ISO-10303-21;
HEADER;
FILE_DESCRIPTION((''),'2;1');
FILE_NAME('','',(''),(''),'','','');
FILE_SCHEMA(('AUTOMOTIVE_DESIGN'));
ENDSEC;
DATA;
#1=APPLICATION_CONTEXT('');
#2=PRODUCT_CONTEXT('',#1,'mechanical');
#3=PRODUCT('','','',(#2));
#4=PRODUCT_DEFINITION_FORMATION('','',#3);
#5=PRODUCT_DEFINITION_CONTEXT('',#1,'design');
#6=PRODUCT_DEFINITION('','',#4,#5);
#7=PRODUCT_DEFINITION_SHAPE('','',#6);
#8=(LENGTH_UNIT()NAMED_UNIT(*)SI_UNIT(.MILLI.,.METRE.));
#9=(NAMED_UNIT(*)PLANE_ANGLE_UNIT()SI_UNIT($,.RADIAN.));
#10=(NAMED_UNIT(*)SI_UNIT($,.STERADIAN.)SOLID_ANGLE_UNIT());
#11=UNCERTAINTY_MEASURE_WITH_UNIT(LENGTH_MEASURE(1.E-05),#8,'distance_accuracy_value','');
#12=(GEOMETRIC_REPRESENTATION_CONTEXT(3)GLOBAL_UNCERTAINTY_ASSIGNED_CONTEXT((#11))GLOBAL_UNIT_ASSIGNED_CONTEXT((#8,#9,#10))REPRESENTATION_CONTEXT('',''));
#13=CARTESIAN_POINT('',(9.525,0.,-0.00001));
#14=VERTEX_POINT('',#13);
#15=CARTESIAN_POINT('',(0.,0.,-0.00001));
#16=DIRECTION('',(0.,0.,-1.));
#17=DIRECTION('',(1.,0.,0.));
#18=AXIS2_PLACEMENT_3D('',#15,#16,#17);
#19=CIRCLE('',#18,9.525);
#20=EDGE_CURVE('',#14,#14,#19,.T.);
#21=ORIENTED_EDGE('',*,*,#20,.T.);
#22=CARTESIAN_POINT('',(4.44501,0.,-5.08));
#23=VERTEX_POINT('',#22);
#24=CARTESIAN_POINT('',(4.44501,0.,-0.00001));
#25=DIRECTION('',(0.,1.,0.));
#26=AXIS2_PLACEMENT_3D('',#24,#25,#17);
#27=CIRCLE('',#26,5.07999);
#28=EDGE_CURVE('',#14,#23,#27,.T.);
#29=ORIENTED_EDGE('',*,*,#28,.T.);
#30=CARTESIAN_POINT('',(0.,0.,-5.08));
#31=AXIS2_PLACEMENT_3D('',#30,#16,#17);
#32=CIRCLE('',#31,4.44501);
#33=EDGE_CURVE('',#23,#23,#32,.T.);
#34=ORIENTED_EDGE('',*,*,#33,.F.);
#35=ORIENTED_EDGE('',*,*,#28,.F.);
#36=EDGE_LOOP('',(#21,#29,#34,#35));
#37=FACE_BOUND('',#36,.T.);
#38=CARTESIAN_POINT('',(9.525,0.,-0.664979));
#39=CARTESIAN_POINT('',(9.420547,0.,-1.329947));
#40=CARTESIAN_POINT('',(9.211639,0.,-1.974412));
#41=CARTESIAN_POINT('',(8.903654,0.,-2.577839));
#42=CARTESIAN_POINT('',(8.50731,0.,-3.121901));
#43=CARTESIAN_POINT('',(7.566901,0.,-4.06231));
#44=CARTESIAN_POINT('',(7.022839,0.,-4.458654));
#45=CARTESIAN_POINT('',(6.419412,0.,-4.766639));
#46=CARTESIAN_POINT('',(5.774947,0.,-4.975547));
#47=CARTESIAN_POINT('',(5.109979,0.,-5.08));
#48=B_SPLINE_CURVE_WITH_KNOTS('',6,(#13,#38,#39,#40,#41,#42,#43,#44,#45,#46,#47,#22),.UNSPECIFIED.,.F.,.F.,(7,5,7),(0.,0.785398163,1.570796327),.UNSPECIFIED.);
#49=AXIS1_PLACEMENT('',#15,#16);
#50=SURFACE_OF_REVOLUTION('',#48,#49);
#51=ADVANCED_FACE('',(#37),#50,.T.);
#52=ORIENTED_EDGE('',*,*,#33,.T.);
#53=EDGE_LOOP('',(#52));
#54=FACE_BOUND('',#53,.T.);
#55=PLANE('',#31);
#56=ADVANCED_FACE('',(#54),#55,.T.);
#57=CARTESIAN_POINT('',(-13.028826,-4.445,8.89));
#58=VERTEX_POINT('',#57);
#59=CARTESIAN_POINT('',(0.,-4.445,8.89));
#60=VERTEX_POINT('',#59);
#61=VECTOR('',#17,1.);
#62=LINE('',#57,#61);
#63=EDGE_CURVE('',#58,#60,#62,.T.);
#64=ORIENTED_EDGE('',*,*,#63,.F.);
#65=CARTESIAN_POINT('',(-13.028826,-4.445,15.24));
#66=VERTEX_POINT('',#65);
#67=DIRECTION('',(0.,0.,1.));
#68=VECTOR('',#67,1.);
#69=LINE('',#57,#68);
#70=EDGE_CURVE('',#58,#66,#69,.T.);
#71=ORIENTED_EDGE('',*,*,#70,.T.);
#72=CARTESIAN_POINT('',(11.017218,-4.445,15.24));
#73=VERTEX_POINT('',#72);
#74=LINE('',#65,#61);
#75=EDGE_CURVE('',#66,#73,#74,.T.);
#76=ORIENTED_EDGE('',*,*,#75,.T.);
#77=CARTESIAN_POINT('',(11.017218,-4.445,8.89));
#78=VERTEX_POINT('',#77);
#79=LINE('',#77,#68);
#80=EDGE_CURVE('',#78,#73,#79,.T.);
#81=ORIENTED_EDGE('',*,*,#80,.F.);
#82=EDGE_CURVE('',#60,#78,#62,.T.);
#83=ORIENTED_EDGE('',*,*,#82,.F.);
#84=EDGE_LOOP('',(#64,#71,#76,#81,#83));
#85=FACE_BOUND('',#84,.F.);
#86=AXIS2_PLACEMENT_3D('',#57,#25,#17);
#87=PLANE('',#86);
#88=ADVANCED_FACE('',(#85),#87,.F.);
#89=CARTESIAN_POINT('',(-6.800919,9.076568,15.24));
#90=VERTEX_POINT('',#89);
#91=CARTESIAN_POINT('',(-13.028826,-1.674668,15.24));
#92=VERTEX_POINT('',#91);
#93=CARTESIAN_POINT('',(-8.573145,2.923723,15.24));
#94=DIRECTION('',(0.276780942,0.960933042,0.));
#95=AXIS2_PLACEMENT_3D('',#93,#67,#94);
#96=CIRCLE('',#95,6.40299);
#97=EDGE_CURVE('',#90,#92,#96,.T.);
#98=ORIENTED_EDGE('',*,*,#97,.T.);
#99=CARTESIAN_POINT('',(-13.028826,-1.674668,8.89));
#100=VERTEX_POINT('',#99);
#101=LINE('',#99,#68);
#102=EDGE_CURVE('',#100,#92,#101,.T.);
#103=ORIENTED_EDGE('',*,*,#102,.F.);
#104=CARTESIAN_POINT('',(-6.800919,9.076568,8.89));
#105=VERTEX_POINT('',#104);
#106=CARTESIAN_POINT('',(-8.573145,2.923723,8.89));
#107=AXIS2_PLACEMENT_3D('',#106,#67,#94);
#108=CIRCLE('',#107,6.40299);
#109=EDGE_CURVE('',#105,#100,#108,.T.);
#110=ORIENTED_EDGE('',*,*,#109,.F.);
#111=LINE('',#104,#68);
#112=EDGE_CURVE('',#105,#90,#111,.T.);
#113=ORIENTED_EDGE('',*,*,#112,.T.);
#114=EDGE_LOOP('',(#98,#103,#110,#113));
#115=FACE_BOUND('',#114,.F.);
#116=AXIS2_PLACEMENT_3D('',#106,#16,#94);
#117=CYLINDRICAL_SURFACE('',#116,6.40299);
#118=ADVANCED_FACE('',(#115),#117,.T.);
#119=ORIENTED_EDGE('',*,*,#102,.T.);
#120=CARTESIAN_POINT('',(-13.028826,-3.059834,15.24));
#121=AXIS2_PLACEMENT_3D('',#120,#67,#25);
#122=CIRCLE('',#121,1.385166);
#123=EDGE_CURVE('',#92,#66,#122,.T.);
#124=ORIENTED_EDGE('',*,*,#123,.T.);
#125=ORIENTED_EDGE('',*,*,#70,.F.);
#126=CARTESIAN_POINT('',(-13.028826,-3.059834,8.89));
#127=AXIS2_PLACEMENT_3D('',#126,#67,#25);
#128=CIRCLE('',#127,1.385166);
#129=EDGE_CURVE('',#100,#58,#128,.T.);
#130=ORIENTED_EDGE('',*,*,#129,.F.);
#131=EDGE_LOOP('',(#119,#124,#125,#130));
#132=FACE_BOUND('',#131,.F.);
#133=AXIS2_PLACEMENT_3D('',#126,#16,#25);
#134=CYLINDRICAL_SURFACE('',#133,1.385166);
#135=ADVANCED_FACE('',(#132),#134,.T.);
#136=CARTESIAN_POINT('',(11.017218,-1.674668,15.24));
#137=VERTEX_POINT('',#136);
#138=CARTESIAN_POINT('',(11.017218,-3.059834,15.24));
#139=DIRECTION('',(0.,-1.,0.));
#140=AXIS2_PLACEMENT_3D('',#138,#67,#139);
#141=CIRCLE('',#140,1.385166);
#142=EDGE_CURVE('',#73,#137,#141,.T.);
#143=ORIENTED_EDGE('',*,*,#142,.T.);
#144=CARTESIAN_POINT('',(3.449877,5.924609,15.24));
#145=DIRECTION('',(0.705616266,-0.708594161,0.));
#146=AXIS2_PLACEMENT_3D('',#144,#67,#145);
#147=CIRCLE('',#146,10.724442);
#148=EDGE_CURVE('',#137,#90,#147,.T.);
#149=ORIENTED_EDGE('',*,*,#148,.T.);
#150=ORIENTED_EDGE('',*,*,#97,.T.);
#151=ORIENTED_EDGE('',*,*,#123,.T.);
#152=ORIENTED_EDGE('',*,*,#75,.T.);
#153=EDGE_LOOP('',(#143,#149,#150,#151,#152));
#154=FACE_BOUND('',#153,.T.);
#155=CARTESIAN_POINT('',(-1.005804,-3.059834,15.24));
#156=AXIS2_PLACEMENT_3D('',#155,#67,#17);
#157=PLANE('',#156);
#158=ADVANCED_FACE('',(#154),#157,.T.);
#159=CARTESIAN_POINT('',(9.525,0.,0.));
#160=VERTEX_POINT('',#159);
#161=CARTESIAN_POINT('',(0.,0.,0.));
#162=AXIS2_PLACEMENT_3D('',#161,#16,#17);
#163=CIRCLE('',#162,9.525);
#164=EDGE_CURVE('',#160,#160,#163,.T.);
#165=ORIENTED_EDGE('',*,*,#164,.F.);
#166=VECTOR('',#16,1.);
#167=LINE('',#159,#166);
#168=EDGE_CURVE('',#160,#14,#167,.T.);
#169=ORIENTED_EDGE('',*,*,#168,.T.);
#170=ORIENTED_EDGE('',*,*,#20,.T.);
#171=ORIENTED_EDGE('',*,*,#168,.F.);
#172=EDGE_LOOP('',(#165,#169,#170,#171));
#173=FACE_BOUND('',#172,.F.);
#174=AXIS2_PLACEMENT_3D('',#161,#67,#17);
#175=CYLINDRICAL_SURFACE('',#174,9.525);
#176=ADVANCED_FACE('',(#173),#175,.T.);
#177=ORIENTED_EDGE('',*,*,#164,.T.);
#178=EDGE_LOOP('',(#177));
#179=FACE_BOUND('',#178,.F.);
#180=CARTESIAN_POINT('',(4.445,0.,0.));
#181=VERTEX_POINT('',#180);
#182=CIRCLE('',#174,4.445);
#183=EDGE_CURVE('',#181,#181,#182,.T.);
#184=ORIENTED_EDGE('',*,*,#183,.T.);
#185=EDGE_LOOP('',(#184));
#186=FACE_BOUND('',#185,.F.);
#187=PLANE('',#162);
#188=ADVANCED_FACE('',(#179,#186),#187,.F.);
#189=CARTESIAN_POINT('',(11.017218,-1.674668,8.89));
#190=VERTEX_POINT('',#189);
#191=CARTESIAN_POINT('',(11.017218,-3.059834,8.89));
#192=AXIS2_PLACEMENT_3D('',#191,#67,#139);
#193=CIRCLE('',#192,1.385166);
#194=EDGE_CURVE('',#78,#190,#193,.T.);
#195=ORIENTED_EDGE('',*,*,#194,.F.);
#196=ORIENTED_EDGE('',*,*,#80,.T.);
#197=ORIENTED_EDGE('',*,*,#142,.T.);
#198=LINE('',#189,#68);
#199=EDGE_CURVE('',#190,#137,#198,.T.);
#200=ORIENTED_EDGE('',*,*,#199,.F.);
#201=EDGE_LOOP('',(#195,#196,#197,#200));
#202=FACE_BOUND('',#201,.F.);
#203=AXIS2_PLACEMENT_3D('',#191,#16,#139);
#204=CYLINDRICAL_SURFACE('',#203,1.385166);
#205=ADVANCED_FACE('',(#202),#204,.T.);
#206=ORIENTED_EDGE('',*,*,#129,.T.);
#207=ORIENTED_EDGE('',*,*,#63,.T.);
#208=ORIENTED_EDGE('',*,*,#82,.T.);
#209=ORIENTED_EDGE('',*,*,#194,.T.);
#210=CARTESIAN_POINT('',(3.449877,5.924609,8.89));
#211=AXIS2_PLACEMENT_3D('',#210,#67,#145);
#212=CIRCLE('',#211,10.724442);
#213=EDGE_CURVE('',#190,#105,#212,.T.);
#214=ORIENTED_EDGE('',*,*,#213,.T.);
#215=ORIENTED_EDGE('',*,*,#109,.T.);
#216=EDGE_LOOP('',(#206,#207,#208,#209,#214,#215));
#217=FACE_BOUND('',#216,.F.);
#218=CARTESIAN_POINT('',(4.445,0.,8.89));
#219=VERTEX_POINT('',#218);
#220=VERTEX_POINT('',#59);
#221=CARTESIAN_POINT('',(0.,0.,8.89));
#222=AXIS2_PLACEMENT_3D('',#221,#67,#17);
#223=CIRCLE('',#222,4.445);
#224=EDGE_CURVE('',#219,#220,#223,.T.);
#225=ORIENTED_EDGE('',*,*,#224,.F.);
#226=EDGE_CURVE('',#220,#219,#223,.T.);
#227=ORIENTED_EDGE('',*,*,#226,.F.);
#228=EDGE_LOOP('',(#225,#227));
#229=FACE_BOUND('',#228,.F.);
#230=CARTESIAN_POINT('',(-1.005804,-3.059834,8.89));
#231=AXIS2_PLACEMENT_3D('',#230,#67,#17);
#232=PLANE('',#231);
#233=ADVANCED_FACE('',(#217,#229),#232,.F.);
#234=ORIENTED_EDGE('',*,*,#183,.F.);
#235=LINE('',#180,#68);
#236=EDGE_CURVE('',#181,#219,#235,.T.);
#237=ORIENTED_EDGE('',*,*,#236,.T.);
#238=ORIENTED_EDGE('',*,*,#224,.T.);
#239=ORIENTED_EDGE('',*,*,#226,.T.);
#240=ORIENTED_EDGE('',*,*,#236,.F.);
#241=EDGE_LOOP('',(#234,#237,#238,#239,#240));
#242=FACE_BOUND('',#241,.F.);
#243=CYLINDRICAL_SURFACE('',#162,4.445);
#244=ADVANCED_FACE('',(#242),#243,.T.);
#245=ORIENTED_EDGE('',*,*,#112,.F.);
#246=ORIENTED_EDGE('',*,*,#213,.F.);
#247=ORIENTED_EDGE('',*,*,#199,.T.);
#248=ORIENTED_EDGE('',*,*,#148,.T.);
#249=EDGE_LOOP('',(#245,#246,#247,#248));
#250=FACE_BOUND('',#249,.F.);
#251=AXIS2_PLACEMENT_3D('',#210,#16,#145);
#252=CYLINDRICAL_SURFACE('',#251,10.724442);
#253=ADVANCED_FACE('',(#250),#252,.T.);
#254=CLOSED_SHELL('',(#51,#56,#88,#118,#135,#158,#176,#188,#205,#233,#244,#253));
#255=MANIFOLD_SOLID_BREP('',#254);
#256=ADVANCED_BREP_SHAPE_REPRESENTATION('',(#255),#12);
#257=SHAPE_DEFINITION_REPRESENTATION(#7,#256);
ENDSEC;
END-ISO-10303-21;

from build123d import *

# Parameters (mm, degrees)
F0_R     = 4.445
F1_DEPTH = 8.89
F3_DEPTH = 6.35
F4_R     = 9.525
F5_DEPTH = 5.08
F6_R     = 5.07999


# Not quite as in the source:
# - a fillet or chamfer is up to 0.001 mm smaller than in the source, because OpenCascade refuses the exact size


with BuildPart() as f1:
    # F0 (on Top) → F1 (new body)
    with BuildSketch(Plane.XY):
        Circle(F0_R)
    extrude(amount=F1_DEPTH)

    # F2 (on face) → F3 (join)
    with BuildSketch(Plane.XY.offset(8.89)):
        with BuildLine():
            Line((-13.0288261443, -4.445), (11.0172175353, -4.445))
            ThreePointArc((11.0172175353, -4.445), (12.4023835963, -3.0598339389), (11.0172175353, -1.6746678779))
            Line((11.0172175353, -1.6746678779), (-4.1174643288, -1.6746678779))
            Line((-4.1174643288, -1.6746678779), (-13.0288261443, -1.6746678779))
            ThreePointArc((-13.0288261443, -1.6746678779), (-14.4139922054, -3.0598339389), (-13.0288261443, -4.445))
        make_face()
        with BuildLine():
            Line((-4.1174643288, -1.6746678779), (11.0172175353, -1.6746678779))
            ThreePointArc((11.0172175353, -1.6746678779), (8.99040904, 15.1069926007), (-6.8009194972, 9.0765677298))
            ThreePointArc((-6.8009194972, 9.0765677298), (-2.3607405432, 4.4743080446), (-4.1174643288, -1.6746678779))
        make_face()
        with BuildLine():
            ThreePointArc((-6.8009194972, 9.0765677298), (-14.1136776733, 6.1332066084), (-13.0288261443, -1.6746678779))
            Line((-13.0288261443, -1.6746678779), (-4.1174643288, -1.6746678779))
            ThreePointArc((-4.1174643288, -1.6746678779), (-6.9553513424, 3.3275159413), (-6.8009194972, 9.0765677298))
        make_face()
        with BuildLine():
            ThreePointArc((-6.8009194972, 9.0765677298), (-6.9553513424, 3.3275159413), (-4.1174643288, -1.6746678779))
            ThreePointArc((-4.1174643288, -1.6746678779), (-2.3607405432, 4.4743080446), (-6.8009194972, 9.0765677298))
        make_face()
    extrude(amount=F3_DEPTH)

    # F4 (on face) → F5 (join)
    with BuildSketch(Plane(origin=(0, 0, 0), x_dir=(1, 0, 0), z_dir=(0, 0, -1))):
        Circle(F4_R)
    extrude(amount=F5_DEPTH)

    # F6 (radius 5.08 in the source; OpenCascade refuses exactly that, so slightly less here)
    f6_edges = [f1.edges().sort_by_distance(p)[0] for p in [
        (-9.525, 0, -5.08),
    ]]
    fillet(f6_edges, radius=F6_R)


solid = f1.part
